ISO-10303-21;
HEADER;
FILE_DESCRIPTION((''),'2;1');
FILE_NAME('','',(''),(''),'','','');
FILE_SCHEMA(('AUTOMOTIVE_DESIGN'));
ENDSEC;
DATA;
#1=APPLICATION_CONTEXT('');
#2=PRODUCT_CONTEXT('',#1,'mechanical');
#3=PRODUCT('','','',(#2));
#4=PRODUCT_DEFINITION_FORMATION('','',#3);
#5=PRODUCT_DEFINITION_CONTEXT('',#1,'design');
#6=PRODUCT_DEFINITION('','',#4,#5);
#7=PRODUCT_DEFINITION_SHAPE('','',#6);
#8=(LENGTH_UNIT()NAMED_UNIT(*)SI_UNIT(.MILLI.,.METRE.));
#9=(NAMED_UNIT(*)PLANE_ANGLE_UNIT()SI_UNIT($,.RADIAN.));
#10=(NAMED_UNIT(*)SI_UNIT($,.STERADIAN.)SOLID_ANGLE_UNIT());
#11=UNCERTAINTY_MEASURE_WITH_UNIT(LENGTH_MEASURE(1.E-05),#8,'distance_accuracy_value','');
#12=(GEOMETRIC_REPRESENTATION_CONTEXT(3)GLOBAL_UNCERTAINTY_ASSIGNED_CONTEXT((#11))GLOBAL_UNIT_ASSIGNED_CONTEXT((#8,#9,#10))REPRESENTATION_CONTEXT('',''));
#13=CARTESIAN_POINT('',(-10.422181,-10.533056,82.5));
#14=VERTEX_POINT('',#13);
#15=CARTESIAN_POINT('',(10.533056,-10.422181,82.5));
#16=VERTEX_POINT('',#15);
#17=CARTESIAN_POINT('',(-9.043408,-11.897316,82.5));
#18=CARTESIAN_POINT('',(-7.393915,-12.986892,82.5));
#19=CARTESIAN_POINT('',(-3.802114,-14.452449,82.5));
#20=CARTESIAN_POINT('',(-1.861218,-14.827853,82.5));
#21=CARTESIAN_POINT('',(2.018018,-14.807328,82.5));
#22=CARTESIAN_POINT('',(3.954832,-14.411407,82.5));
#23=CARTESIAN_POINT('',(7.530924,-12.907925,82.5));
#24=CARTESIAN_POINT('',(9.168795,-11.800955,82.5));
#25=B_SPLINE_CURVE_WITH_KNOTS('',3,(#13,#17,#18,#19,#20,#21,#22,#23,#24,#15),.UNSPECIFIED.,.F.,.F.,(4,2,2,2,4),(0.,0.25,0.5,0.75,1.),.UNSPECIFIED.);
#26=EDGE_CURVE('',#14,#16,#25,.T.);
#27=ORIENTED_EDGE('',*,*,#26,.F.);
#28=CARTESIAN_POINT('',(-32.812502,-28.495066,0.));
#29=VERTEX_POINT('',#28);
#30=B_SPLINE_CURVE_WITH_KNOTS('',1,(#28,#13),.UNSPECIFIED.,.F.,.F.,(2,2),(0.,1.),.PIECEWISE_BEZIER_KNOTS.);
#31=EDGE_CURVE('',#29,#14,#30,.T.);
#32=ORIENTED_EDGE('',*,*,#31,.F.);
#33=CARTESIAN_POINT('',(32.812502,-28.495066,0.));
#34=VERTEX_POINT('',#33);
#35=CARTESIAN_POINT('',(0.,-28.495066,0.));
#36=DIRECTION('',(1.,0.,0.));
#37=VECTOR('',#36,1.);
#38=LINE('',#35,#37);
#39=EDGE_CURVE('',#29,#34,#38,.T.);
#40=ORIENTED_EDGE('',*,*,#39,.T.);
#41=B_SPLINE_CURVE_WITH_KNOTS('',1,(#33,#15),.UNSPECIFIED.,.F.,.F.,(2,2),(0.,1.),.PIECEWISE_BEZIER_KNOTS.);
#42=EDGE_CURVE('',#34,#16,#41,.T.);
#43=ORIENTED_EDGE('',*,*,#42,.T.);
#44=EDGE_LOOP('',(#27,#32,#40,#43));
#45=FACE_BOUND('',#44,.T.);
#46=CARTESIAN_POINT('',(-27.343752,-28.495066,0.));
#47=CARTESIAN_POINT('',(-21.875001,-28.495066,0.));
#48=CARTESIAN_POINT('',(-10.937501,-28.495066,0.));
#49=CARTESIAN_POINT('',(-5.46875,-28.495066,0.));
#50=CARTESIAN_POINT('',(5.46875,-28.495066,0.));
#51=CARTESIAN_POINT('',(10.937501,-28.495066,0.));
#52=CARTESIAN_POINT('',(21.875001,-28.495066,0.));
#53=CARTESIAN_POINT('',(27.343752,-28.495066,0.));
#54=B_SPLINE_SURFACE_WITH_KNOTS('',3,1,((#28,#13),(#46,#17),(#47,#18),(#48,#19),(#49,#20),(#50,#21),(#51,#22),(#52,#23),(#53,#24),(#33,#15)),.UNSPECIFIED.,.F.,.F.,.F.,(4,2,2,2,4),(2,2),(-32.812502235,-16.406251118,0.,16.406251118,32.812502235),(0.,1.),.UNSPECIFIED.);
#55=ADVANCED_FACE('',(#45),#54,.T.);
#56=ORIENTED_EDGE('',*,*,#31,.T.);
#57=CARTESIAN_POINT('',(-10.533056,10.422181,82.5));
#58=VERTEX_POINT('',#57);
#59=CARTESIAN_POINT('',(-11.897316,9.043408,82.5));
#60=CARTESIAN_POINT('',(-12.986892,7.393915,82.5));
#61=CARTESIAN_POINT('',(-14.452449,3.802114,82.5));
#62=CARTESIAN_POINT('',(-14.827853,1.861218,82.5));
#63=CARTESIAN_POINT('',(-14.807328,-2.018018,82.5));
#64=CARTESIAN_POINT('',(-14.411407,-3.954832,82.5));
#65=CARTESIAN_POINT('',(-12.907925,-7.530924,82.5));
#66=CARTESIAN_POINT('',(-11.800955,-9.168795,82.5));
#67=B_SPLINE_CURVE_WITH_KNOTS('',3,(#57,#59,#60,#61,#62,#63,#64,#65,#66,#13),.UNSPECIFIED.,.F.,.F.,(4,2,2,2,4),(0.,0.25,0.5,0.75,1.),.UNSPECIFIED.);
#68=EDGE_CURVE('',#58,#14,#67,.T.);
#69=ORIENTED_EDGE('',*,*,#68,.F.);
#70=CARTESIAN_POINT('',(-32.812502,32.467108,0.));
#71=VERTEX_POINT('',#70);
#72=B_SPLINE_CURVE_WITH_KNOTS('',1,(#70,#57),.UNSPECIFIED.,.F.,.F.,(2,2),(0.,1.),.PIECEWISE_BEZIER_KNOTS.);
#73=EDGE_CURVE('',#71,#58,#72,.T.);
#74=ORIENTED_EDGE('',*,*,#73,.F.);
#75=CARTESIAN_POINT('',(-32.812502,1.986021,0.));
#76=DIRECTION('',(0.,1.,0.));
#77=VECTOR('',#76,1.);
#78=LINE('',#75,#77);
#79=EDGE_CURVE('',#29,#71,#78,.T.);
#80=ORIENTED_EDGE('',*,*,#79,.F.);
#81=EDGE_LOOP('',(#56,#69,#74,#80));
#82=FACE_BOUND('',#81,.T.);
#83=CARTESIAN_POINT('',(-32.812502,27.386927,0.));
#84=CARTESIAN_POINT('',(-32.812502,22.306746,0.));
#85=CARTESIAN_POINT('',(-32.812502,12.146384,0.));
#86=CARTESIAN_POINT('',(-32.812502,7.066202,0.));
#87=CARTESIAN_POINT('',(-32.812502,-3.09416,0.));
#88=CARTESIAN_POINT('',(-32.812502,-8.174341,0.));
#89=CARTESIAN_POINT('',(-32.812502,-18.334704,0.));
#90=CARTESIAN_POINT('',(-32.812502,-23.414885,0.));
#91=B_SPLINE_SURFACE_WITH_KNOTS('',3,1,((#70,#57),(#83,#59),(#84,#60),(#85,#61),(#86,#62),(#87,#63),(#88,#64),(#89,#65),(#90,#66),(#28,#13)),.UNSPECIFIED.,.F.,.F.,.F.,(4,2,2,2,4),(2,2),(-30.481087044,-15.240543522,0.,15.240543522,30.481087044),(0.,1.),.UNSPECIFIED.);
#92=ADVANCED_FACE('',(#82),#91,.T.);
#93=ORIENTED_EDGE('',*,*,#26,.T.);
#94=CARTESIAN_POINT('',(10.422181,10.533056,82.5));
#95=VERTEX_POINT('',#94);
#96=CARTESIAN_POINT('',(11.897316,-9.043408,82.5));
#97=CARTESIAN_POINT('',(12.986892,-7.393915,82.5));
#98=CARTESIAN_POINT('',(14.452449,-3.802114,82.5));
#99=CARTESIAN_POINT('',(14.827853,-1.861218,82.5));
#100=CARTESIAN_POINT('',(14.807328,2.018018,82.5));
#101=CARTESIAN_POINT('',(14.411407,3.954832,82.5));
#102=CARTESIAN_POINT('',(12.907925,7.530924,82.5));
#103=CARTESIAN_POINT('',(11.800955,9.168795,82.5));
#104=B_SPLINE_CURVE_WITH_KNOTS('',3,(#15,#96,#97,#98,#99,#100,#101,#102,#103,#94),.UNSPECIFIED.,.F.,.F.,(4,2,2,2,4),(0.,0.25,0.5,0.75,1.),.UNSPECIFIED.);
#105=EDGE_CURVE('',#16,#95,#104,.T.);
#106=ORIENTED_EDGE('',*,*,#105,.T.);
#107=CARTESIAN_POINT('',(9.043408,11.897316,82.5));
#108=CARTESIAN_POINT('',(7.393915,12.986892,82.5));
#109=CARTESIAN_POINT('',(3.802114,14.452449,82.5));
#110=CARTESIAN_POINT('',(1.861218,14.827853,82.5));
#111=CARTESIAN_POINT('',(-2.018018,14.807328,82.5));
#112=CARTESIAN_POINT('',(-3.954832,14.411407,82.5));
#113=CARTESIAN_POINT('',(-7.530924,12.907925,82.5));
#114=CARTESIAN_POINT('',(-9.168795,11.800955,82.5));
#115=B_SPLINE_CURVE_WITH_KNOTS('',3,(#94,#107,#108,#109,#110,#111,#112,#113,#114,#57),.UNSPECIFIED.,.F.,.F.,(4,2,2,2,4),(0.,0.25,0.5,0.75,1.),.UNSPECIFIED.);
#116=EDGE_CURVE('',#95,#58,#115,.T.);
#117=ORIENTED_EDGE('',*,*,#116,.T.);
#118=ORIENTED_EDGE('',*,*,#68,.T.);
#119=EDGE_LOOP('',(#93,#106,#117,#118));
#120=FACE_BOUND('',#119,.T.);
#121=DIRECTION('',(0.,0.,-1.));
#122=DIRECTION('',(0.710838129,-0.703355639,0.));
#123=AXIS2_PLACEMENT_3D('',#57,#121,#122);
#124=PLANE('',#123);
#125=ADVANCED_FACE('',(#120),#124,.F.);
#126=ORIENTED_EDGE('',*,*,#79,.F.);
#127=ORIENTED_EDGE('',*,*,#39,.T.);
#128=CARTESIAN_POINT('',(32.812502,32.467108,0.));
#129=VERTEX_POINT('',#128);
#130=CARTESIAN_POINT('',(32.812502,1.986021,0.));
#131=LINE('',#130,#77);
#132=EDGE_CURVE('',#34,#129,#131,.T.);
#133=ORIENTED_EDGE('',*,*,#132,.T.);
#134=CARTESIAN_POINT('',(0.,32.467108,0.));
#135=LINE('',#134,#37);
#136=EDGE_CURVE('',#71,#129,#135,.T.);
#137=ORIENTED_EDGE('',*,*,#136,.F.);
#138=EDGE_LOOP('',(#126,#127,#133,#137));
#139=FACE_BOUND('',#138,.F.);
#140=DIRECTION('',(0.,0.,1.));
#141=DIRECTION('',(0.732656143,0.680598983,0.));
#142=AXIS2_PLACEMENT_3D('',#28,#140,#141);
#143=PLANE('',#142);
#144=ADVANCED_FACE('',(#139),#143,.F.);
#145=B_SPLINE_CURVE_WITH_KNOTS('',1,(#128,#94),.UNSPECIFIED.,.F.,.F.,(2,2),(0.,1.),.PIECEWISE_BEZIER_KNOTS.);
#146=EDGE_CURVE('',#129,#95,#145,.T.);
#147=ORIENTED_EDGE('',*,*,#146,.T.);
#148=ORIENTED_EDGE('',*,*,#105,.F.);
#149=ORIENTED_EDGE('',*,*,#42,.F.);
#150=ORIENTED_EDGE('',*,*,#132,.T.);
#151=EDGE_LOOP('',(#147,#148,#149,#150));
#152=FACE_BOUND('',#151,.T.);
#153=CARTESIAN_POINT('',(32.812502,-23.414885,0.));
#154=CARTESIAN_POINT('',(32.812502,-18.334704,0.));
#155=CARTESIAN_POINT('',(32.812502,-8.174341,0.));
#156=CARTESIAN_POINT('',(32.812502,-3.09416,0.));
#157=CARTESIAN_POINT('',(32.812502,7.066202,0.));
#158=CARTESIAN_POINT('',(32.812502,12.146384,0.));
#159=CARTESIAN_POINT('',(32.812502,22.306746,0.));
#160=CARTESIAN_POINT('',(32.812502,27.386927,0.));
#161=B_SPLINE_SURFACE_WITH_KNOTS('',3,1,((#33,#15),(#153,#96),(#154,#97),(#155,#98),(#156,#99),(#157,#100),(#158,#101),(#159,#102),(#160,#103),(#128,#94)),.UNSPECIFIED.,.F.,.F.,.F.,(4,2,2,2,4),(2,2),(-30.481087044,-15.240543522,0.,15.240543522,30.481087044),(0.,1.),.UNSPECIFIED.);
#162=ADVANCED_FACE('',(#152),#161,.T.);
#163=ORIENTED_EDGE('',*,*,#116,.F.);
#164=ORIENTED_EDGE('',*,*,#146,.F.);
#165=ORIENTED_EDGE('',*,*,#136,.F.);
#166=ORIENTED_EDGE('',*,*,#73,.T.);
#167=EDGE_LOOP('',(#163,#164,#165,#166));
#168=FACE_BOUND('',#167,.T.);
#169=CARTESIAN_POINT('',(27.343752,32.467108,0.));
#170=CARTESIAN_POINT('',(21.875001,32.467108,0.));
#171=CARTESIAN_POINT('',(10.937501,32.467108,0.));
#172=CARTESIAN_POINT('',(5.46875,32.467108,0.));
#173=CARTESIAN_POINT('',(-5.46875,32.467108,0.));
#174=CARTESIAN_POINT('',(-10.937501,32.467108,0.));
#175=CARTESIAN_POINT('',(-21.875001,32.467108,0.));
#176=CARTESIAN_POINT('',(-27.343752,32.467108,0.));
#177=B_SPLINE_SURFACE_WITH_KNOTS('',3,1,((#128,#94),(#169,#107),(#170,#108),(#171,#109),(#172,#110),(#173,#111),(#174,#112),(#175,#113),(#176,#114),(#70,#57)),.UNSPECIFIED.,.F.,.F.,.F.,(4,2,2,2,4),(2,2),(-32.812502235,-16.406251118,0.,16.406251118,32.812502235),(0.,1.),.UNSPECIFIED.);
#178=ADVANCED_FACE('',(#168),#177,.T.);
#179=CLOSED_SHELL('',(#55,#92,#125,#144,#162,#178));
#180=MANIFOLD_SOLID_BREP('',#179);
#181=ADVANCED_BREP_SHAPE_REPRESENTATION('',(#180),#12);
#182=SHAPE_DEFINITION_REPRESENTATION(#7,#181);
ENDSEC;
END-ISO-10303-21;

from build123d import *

# Parameters (mm, degrees)
F0_W = 65.6250044703
F0_H = 60.9621740878


# Not quite as in the source:
# - the arcs of a loft's sections are written as splines that run evenly, so that the points pair up as in the source's solid


with BuildPart() as f3:
    # F0 (on Top) → F3 section 0
    with BuildSketch(Plane.XY):
        with Locations((0, 1.986021176)):
            Rectangle(F0_W, F0_H)
    # F2 (on offset) → F3 section 1
    with BuildSketch(Plane.XY.offset(82.5)):
        with BuildLine():
            add(Edge.make_bspline(
                [(-10.5330555195, 10.4221814901), (-11.8973158864, 9.0434077468), (-12.9868922333, 7.3939150045), (-14.452448956, 3.8021136421), (-14.8278526978, 1.8612182422), (-14.8073276839, -2.0180177984), (-14.4114070039, -3.9548321255), (-12.9079250007, -7.5309243224), (-11.8009552334, -9.1687951527), (-10.4221814901, -10.5330555195)],
                knots=[0, 0, 0, 0, 0.25, 0.25, 0.5, 0.5, 0.75, 0.75, 1, 1, 1, 1], degree=3))
            add(Edge.make_bspline(
                [(-10.4221814901, -10.5330555195), (-9.0434077468, -11.8973158864), (-7.3939150045, -12.9868922333), (-3.8021136421, -14.452448956), (-1.8612182422, -14.8278526978), (2.0180177984, -14.8073276839), (3.9548321255, -14.4114070039), (7.5309243224, -12.9079250007), (9.1687951527, -11.8009552334), (10.5330555195, -10.4221814901)],
                knots=[0, 0, 0, 0, 0.25, 0.25, 0.5, 0.5, 0.75, 0.75, 1, 1, 1, 1], degree=3))
            add(Edge.make_bspline(
                [(10.5330555195, -10.4221814901), (11.8973158864, -9.0434077468), (12.9868922333, -7.3939150045), (14.452448956, -3.8021136421), (14.8278526978, -1.8612182422), (14.8073276839, 2.0180177984), (14.4114070039, 3.9548321255), (12.9079250007, 7.5309243224), (11.8009552334, 9.1687951527), (10.4221814901, 10.5330555195)],
                knots=[0, 0, 0, 0, 0.25, 0.25, 0.5, 0.5, 0.75, 0.75, 1, 1, 1, 1], degree=3))
            add(Edge.make_bspline(
                [(10.4221814901, 10.5330555195), (9.0434077468, 11.8973158864), (7.3939150045, 12.9868922333), (3.8021136421, 14.452448956), (1.8612182422, 14.8278526978), (-2.0180177984, 14.8073276839), (-3.9548321255, 14.4114070039), (-7.5309243224, 12.9079250007), (-9.1687951527, 11.8009552334), (-10.5330555195, 10.4221814901)],
                knots=[0, 0, 0, 0, 0.25, 0.25, 0.5, 0.5, 0.75, 0.75, 1, 1, 1, 1], degree=3))
        make_face()
    loft(ruled=True)


solid = f3.part
